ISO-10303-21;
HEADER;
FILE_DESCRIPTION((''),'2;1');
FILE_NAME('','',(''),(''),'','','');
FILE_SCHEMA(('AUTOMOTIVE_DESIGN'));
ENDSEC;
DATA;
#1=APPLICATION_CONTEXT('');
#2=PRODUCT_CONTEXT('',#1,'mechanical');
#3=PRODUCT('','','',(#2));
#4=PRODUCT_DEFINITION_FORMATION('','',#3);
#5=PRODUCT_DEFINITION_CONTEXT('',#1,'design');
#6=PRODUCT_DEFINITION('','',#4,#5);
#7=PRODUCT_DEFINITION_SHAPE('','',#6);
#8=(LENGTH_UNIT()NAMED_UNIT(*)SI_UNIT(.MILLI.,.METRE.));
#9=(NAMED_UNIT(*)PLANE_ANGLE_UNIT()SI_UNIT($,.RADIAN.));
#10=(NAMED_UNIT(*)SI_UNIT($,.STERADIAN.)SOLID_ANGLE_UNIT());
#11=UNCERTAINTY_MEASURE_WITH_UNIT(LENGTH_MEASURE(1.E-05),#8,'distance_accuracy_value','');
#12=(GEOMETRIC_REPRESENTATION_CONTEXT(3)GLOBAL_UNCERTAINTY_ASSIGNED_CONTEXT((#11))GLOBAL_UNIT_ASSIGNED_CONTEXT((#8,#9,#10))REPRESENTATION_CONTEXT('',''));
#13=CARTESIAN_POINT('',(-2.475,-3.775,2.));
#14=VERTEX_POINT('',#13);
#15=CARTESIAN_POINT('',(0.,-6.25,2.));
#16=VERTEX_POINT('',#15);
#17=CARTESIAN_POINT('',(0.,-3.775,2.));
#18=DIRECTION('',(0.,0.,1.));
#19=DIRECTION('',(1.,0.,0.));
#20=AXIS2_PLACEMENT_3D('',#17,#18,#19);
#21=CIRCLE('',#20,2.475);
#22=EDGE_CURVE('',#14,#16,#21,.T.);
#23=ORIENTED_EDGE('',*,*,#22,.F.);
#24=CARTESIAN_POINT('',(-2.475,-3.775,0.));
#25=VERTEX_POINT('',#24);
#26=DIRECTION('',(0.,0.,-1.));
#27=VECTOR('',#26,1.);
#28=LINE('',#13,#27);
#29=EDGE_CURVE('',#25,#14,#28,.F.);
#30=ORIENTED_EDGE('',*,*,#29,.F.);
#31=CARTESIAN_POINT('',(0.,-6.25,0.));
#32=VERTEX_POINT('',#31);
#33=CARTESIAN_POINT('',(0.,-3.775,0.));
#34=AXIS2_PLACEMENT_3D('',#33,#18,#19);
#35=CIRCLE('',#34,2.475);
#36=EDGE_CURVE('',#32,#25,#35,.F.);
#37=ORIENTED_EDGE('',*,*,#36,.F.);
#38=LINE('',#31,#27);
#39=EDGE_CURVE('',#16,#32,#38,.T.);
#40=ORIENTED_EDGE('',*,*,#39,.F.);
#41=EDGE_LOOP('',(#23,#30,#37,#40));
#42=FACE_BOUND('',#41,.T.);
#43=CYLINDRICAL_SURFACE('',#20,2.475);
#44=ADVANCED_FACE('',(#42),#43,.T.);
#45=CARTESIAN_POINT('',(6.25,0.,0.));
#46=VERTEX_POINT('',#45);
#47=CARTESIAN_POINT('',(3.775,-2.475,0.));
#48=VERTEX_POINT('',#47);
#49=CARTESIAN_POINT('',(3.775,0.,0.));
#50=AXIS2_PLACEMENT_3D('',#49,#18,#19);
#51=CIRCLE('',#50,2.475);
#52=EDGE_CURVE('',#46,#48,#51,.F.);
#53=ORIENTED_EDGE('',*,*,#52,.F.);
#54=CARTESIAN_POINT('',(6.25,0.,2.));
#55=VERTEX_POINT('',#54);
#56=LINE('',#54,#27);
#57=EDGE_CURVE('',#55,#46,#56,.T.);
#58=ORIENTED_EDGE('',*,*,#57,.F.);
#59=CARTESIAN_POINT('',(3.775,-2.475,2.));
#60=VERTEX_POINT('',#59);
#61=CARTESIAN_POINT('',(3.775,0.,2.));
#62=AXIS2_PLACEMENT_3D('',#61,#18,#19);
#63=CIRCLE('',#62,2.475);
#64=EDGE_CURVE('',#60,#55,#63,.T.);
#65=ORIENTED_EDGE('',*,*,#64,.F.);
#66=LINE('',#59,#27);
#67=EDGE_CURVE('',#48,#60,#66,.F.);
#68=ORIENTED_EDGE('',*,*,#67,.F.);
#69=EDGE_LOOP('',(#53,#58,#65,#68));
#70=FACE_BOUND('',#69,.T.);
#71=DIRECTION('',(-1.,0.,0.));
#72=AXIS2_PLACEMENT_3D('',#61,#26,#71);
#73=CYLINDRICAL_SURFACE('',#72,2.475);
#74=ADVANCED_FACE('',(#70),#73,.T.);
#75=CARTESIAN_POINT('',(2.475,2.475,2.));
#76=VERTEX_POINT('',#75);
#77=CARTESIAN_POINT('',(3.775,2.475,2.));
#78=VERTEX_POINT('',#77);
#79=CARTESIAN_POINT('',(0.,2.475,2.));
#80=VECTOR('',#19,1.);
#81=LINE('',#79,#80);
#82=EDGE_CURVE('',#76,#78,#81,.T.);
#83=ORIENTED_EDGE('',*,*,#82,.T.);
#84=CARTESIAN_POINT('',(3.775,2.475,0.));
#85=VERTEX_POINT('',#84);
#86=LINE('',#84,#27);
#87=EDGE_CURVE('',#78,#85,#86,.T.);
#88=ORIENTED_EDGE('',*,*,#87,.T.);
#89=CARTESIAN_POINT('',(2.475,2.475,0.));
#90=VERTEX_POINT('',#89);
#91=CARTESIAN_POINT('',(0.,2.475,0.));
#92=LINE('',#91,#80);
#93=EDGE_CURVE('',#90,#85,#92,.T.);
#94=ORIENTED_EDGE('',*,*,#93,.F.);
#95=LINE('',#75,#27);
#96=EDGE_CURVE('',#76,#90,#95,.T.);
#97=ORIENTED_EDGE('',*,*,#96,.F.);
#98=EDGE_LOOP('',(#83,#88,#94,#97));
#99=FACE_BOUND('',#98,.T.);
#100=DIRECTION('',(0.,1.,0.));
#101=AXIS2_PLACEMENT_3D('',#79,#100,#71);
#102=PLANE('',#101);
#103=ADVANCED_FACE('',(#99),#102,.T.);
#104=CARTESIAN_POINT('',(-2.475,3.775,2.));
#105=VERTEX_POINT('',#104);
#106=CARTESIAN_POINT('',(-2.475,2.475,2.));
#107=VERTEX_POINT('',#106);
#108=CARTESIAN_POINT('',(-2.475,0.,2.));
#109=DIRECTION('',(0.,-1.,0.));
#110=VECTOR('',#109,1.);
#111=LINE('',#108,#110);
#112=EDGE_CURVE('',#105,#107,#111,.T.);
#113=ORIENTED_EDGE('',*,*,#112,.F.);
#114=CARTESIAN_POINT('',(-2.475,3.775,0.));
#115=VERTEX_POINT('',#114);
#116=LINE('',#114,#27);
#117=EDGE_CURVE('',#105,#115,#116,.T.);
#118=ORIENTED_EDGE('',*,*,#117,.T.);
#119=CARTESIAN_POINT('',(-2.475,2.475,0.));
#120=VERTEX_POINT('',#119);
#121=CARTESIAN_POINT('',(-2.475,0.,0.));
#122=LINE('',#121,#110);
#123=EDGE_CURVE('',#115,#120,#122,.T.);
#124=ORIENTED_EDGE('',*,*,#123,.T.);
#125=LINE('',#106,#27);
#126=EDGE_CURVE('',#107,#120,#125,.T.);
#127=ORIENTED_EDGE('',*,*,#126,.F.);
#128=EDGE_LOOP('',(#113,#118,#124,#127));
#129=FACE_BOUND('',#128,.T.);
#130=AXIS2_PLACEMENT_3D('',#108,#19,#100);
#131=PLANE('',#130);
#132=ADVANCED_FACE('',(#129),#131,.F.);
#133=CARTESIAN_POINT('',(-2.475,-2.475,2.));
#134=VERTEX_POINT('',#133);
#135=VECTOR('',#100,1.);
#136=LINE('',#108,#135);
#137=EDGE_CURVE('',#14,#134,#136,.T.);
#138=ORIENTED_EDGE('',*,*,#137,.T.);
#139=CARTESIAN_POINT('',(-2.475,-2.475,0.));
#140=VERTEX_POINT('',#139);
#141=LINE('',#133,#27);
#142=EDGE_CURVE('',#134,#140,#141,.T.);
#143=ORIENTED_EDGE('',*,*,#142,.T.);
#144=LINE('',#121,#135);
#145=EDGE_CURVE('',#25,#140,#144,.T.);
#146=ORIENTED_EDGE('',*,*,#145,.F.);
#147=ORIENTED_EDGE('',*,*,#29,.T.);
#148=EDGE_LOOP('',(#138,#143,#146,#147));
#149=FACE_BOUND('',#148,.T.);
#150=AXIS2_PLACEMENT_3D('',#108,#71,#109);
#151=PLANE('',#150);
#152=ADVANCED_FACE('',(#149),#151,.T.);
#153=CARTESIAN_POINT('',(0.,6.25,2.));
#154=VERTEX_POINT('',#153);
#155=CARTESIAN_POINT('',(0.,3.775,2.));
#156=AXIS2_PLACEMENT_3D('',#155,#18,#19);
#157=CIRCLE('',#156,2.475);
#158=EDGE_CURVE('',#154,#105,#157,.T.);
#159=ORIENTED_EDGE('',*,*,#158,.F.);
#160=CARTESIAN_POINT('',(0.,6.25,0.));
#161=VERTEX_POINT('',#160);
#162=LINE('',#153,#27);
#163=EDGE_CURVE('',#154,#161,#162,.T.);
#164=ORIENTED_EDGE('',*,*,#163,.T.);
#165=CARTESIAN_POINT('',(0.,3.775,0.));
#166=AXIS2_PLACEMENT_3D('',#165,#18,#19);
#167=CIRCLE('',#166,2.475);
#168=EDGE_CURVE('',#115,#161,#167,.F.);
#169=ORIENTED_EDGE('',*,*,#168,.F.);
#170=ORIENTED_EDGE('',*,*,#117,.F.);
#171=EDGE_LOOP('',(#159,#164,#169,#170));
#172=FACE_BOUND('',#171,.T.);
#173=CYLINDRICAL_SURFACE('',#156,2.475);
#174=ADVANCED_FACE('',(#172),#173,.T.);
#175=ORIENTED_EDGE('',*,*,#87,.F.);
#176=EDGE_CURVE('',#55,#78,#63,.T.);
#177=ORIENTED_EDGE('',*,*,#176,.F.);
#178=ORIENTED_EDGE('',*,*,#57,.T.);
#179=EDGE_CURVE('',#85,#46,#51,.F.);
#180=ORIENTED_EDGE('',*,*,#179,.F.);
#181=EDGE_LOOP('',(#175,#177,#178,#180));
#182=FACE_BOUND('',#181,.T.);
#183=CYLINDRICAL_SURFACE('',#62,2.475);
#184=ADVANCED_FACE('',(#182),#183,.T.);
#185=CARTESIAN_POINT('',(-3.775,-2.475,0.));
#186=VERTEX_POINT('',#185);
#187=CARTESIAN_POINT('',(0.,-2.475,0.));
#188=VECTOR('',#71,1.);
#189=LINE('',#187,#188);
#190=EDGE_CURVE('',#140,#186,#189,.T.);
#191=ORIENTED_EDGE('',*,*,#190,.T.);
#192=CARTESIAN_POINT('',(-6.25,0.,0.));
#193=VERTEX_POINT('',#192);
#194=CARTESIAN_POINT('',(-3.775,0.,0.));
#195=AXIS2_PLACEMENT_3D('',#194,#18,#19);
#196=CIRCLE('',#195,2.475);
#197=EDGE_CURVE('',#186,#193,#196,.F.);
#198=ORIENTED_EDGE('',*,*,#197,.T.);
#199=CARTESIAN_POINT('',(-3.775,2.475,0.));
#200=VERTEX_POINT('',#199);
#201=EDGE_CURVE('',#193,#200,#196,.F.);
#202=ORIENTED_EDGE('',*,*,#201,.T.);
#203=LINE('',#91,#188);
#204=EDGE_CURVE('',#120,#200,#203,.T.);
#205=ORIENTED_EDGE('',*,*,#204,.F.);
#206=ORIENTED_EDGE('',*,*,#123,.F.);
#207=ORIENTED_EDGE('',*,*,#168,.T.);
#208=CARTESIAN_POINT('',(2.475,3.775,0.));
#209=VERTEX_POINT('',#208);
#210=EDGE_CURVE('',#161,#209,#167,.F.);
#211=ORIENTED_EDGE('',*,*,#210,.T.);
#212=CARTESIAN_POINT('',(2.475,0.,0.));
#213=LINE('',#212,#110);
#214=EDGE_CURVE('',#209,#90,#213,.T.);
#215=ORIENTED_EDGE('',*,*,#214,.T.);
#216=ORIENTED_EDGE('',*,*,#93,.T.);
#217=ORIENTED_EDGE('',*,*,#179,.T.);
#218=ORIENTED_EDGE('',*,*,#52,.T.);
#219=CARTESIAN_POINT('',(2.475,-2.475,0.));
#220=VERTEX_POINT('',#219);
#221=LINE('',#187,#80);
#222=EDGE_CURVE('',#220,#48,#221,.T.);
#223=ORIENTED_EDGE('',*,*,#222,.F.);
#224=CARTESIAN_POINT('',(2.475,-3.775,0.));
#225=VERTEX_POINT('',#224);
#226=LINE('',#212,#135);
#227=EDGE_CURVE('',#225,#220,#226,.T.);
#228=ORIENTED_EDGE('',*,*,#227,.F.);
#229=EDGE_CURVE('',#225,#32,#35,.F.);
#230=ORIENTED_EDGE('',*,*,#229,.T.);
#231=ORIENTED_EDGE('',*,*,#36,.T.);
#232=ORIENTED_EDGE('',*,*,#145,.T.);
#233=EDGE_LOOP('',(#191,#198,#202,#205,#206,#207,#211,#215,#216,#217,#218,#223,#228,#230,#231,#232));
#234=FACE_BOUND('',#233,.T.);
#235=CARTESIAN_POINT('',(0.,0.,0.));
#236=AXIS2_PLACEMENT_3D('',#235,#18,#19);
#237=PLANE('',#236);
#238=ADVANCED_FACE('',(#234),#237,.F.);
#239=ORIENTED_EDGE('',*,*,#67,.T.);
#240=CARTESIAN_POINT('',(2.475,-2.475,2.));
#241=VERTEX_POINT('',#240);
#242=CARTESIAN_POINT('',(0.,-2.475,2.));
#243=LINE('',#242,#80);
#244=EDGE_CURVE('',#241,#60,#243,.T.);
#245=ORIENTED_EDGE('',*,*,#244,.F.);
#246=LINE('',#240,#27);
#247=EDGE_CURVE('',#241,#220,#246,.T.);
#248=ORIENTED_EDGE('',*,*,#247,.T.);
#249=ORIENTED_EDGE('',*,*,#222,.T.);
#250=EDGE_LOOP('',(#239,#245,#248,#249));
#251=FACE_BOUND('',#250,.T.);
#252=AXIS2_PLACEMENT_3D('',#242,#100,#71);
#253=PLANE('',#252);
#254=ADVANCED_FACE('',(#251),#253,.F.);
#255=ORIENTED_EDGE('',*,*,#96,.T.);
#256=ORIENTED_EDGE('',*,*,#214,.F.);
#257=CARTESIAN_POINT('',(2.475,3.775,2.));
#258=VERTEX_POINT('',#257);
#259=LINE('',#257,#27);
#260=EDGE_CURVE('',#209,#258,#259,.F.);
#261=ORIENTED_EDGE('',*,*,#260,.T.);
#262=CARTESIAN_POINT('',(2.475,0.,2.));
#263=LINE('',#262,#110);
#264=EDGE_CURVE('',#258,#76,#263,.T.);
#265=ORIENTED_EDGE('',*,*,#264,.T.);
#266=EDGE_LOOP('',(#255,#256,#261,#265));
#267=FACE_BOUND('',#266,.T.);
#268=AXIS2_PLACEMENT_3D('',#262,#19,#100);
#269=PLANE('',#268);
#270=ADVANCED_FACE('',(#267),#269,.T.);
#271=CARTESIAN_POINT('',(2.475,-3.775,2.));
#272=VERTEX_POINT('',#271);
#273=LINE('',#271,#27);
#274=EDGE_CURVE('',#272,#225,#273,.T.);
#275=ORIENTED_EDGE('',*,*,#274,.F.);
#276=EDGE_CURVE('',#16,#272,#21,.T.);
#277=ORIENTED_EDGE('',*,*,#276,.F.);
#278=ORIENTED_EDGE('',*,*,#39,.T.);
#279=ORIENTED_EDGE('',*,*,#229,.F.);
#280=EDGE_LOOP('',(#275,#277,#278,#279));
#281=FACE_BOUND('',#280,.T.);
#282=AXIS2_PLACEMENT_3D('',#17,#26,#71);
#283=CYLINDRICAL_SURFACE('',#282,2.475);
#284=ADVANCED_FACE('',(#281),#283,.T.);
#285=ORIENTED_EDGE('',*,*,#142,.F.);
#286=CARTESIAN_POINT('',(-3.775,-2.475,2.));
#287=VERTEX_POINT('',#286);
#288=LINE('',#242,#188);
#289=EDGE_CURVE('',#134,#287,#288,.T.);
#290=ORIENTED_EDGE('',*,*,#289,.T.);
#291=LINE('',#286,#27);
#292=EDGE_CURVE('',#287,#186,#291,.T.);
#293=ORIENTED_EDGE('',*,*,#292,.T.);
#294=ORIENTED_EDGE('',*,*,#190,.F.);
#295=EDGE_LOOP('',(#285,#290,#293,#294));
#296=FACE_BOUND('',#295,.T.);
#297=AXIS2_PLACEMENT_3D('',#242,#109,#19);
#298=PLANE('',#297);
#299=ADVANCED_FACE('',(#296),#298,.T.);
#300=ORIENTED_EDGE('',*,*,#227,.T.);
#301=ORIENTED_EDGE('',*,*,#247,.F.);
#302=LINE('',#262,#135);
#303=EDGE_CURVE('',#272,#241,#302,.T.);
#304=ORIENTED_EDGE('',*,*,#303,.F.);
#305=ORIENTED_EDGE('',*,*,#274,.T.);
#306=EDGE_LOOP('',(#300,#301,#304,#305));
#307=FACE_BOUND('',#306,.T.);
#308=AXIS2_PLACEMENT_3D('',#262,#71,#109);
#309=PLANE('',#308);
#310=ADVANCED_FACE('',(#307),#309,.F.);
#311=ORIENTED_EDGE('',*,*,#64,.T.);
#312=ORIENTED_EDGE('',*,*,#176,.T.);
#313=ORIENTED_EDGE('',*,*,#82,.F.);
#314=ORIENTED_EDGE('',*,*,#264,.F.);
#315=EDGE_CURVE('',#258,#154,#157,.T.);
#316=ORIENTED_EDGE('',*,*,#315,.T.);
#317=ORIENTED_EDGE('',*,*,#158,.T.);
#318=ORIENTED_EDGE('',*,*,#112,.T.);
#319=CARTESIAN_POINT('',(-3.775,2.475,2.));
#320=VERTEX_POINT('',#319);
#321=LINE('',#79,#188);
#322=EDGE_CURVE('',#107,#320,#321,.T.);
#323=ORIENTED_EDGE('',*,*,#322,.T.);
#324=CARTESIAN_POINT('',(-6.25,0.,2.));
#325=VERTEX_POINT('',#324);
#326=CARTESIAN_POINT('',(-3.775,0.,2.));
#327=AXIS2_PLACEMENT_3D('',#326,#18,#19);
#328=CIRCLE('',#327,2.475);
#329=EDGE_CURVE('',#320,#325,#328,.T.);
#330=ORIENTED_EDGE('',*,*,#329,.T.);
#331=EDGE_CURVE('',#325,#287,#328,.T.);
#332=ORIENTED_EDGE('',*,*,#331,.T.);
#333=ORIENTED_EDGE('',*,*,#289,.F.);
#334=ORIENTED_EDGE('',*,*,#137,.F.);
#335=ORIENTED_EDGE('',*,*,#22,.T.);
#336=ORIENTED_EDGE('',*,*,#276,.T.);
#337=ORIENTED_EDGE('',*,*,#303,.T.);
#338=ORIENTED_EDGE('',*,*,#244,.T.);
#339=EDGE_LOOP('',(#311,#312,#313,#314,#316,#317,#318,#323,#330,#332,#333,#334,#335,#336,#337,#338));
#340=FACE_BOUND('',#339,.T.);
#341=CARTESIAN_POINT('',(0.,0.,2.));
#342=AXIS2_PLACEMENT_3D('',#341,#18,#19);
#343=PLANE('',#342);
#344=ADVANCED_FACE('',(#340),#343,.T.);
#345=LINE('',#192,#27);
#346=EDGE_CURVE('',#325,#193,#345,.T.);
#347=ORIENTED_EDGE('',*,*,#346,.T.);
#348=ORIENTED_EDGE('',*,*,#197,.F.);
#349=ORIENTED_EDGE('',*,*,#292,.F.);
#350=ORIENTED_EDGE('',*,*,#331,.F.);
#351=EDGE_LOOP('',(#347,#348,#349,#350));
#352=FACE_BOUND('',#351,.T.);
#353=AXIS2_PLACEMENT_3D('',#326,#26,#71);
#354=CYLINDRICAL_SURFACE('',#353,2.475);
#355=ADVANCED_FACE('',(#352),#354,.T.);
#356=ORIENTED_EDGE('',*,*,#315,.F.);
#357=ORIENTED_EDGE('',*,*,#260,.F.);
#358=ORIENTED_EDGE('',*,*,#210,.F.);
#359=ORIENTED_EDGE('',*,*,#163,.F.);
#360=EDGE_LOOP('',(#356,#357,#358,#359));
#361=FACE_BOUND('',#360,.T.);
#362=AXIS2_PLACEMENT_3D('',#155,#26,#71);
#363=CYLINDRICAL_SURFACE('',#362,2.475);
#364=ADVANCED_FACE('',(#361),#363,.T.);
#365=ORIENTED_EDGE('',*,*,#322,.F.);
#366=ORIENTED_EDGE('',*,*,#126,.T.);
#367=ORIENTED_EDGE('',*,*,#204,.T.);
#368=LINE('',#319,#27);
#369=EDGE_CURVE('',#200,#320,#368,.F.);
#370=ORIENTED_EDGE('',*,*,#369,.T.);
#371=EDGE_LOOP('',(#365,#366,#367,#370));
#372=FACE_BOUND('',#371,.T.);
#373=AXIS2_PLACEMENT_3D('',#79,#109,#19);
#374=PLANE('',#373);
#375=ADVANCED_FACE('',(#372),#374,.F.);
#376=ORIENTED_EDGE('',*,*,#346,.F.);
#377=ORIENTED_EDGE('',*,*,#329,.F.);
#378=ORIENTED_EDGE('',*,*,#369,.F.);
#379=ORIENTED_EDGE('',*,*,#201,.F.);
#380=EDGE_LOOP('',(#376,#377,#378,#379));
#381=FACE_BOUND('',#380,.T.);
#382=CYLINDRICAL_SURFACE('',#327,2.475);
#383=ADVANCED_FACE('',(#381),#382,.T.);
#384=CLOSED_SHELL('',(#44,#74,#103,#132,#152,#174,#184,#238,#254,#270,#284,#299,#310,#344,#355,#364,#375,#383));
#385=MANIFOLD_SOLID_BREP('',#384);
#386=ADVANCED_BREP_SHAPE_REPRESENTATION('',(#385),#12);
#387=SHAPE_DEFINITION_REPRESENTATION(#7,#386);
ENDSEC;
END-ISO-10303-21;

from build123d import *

# Parameters (mm, degrees)
BOSS_EXTRUDE1_DEPTH = 2
FILLET1_R           = 2.475


with BuildPart() as part:
    # Sketch1 → Boss-Extrude1 (new body)
    with BuildSketch(Plane.XY):
        Polygon((2.475, 6.25), (-2.475, 6.25), (-2.475, 2.475), (-6.25, 2.475), (-6.25, -2.475), (-2.475, -2.475), (-2.475, -6.25), (2.475, -6.25), (2.475, -2.475), (6.25, -2.475), (6.25, 2.475), (2.475, 2.475), align=None)
    extrude(amount=BOSS_EXTRUDE1_DEPTH)

    # Fillet1
    fillet1_edges = [part.edges().sort_by_distance(p)[0] for p in [
        (2.475, 6.25, 1),
        (6.25, 2.475, 1),
        (6.25, -2.475, 1),
        (2.475, -6.25, 1),
        (-2.475, -6.25, 1),
        (-6.25, -2.475, 1),
        (-6.25, 2.475, 1),
        (-2.475, 6.25, 1),
    ]]
    fillet(fillet1_edges, radius=FILLET1_R - 0.0001)  # a hair under: the kernel refuses the full size


solid = part.part
